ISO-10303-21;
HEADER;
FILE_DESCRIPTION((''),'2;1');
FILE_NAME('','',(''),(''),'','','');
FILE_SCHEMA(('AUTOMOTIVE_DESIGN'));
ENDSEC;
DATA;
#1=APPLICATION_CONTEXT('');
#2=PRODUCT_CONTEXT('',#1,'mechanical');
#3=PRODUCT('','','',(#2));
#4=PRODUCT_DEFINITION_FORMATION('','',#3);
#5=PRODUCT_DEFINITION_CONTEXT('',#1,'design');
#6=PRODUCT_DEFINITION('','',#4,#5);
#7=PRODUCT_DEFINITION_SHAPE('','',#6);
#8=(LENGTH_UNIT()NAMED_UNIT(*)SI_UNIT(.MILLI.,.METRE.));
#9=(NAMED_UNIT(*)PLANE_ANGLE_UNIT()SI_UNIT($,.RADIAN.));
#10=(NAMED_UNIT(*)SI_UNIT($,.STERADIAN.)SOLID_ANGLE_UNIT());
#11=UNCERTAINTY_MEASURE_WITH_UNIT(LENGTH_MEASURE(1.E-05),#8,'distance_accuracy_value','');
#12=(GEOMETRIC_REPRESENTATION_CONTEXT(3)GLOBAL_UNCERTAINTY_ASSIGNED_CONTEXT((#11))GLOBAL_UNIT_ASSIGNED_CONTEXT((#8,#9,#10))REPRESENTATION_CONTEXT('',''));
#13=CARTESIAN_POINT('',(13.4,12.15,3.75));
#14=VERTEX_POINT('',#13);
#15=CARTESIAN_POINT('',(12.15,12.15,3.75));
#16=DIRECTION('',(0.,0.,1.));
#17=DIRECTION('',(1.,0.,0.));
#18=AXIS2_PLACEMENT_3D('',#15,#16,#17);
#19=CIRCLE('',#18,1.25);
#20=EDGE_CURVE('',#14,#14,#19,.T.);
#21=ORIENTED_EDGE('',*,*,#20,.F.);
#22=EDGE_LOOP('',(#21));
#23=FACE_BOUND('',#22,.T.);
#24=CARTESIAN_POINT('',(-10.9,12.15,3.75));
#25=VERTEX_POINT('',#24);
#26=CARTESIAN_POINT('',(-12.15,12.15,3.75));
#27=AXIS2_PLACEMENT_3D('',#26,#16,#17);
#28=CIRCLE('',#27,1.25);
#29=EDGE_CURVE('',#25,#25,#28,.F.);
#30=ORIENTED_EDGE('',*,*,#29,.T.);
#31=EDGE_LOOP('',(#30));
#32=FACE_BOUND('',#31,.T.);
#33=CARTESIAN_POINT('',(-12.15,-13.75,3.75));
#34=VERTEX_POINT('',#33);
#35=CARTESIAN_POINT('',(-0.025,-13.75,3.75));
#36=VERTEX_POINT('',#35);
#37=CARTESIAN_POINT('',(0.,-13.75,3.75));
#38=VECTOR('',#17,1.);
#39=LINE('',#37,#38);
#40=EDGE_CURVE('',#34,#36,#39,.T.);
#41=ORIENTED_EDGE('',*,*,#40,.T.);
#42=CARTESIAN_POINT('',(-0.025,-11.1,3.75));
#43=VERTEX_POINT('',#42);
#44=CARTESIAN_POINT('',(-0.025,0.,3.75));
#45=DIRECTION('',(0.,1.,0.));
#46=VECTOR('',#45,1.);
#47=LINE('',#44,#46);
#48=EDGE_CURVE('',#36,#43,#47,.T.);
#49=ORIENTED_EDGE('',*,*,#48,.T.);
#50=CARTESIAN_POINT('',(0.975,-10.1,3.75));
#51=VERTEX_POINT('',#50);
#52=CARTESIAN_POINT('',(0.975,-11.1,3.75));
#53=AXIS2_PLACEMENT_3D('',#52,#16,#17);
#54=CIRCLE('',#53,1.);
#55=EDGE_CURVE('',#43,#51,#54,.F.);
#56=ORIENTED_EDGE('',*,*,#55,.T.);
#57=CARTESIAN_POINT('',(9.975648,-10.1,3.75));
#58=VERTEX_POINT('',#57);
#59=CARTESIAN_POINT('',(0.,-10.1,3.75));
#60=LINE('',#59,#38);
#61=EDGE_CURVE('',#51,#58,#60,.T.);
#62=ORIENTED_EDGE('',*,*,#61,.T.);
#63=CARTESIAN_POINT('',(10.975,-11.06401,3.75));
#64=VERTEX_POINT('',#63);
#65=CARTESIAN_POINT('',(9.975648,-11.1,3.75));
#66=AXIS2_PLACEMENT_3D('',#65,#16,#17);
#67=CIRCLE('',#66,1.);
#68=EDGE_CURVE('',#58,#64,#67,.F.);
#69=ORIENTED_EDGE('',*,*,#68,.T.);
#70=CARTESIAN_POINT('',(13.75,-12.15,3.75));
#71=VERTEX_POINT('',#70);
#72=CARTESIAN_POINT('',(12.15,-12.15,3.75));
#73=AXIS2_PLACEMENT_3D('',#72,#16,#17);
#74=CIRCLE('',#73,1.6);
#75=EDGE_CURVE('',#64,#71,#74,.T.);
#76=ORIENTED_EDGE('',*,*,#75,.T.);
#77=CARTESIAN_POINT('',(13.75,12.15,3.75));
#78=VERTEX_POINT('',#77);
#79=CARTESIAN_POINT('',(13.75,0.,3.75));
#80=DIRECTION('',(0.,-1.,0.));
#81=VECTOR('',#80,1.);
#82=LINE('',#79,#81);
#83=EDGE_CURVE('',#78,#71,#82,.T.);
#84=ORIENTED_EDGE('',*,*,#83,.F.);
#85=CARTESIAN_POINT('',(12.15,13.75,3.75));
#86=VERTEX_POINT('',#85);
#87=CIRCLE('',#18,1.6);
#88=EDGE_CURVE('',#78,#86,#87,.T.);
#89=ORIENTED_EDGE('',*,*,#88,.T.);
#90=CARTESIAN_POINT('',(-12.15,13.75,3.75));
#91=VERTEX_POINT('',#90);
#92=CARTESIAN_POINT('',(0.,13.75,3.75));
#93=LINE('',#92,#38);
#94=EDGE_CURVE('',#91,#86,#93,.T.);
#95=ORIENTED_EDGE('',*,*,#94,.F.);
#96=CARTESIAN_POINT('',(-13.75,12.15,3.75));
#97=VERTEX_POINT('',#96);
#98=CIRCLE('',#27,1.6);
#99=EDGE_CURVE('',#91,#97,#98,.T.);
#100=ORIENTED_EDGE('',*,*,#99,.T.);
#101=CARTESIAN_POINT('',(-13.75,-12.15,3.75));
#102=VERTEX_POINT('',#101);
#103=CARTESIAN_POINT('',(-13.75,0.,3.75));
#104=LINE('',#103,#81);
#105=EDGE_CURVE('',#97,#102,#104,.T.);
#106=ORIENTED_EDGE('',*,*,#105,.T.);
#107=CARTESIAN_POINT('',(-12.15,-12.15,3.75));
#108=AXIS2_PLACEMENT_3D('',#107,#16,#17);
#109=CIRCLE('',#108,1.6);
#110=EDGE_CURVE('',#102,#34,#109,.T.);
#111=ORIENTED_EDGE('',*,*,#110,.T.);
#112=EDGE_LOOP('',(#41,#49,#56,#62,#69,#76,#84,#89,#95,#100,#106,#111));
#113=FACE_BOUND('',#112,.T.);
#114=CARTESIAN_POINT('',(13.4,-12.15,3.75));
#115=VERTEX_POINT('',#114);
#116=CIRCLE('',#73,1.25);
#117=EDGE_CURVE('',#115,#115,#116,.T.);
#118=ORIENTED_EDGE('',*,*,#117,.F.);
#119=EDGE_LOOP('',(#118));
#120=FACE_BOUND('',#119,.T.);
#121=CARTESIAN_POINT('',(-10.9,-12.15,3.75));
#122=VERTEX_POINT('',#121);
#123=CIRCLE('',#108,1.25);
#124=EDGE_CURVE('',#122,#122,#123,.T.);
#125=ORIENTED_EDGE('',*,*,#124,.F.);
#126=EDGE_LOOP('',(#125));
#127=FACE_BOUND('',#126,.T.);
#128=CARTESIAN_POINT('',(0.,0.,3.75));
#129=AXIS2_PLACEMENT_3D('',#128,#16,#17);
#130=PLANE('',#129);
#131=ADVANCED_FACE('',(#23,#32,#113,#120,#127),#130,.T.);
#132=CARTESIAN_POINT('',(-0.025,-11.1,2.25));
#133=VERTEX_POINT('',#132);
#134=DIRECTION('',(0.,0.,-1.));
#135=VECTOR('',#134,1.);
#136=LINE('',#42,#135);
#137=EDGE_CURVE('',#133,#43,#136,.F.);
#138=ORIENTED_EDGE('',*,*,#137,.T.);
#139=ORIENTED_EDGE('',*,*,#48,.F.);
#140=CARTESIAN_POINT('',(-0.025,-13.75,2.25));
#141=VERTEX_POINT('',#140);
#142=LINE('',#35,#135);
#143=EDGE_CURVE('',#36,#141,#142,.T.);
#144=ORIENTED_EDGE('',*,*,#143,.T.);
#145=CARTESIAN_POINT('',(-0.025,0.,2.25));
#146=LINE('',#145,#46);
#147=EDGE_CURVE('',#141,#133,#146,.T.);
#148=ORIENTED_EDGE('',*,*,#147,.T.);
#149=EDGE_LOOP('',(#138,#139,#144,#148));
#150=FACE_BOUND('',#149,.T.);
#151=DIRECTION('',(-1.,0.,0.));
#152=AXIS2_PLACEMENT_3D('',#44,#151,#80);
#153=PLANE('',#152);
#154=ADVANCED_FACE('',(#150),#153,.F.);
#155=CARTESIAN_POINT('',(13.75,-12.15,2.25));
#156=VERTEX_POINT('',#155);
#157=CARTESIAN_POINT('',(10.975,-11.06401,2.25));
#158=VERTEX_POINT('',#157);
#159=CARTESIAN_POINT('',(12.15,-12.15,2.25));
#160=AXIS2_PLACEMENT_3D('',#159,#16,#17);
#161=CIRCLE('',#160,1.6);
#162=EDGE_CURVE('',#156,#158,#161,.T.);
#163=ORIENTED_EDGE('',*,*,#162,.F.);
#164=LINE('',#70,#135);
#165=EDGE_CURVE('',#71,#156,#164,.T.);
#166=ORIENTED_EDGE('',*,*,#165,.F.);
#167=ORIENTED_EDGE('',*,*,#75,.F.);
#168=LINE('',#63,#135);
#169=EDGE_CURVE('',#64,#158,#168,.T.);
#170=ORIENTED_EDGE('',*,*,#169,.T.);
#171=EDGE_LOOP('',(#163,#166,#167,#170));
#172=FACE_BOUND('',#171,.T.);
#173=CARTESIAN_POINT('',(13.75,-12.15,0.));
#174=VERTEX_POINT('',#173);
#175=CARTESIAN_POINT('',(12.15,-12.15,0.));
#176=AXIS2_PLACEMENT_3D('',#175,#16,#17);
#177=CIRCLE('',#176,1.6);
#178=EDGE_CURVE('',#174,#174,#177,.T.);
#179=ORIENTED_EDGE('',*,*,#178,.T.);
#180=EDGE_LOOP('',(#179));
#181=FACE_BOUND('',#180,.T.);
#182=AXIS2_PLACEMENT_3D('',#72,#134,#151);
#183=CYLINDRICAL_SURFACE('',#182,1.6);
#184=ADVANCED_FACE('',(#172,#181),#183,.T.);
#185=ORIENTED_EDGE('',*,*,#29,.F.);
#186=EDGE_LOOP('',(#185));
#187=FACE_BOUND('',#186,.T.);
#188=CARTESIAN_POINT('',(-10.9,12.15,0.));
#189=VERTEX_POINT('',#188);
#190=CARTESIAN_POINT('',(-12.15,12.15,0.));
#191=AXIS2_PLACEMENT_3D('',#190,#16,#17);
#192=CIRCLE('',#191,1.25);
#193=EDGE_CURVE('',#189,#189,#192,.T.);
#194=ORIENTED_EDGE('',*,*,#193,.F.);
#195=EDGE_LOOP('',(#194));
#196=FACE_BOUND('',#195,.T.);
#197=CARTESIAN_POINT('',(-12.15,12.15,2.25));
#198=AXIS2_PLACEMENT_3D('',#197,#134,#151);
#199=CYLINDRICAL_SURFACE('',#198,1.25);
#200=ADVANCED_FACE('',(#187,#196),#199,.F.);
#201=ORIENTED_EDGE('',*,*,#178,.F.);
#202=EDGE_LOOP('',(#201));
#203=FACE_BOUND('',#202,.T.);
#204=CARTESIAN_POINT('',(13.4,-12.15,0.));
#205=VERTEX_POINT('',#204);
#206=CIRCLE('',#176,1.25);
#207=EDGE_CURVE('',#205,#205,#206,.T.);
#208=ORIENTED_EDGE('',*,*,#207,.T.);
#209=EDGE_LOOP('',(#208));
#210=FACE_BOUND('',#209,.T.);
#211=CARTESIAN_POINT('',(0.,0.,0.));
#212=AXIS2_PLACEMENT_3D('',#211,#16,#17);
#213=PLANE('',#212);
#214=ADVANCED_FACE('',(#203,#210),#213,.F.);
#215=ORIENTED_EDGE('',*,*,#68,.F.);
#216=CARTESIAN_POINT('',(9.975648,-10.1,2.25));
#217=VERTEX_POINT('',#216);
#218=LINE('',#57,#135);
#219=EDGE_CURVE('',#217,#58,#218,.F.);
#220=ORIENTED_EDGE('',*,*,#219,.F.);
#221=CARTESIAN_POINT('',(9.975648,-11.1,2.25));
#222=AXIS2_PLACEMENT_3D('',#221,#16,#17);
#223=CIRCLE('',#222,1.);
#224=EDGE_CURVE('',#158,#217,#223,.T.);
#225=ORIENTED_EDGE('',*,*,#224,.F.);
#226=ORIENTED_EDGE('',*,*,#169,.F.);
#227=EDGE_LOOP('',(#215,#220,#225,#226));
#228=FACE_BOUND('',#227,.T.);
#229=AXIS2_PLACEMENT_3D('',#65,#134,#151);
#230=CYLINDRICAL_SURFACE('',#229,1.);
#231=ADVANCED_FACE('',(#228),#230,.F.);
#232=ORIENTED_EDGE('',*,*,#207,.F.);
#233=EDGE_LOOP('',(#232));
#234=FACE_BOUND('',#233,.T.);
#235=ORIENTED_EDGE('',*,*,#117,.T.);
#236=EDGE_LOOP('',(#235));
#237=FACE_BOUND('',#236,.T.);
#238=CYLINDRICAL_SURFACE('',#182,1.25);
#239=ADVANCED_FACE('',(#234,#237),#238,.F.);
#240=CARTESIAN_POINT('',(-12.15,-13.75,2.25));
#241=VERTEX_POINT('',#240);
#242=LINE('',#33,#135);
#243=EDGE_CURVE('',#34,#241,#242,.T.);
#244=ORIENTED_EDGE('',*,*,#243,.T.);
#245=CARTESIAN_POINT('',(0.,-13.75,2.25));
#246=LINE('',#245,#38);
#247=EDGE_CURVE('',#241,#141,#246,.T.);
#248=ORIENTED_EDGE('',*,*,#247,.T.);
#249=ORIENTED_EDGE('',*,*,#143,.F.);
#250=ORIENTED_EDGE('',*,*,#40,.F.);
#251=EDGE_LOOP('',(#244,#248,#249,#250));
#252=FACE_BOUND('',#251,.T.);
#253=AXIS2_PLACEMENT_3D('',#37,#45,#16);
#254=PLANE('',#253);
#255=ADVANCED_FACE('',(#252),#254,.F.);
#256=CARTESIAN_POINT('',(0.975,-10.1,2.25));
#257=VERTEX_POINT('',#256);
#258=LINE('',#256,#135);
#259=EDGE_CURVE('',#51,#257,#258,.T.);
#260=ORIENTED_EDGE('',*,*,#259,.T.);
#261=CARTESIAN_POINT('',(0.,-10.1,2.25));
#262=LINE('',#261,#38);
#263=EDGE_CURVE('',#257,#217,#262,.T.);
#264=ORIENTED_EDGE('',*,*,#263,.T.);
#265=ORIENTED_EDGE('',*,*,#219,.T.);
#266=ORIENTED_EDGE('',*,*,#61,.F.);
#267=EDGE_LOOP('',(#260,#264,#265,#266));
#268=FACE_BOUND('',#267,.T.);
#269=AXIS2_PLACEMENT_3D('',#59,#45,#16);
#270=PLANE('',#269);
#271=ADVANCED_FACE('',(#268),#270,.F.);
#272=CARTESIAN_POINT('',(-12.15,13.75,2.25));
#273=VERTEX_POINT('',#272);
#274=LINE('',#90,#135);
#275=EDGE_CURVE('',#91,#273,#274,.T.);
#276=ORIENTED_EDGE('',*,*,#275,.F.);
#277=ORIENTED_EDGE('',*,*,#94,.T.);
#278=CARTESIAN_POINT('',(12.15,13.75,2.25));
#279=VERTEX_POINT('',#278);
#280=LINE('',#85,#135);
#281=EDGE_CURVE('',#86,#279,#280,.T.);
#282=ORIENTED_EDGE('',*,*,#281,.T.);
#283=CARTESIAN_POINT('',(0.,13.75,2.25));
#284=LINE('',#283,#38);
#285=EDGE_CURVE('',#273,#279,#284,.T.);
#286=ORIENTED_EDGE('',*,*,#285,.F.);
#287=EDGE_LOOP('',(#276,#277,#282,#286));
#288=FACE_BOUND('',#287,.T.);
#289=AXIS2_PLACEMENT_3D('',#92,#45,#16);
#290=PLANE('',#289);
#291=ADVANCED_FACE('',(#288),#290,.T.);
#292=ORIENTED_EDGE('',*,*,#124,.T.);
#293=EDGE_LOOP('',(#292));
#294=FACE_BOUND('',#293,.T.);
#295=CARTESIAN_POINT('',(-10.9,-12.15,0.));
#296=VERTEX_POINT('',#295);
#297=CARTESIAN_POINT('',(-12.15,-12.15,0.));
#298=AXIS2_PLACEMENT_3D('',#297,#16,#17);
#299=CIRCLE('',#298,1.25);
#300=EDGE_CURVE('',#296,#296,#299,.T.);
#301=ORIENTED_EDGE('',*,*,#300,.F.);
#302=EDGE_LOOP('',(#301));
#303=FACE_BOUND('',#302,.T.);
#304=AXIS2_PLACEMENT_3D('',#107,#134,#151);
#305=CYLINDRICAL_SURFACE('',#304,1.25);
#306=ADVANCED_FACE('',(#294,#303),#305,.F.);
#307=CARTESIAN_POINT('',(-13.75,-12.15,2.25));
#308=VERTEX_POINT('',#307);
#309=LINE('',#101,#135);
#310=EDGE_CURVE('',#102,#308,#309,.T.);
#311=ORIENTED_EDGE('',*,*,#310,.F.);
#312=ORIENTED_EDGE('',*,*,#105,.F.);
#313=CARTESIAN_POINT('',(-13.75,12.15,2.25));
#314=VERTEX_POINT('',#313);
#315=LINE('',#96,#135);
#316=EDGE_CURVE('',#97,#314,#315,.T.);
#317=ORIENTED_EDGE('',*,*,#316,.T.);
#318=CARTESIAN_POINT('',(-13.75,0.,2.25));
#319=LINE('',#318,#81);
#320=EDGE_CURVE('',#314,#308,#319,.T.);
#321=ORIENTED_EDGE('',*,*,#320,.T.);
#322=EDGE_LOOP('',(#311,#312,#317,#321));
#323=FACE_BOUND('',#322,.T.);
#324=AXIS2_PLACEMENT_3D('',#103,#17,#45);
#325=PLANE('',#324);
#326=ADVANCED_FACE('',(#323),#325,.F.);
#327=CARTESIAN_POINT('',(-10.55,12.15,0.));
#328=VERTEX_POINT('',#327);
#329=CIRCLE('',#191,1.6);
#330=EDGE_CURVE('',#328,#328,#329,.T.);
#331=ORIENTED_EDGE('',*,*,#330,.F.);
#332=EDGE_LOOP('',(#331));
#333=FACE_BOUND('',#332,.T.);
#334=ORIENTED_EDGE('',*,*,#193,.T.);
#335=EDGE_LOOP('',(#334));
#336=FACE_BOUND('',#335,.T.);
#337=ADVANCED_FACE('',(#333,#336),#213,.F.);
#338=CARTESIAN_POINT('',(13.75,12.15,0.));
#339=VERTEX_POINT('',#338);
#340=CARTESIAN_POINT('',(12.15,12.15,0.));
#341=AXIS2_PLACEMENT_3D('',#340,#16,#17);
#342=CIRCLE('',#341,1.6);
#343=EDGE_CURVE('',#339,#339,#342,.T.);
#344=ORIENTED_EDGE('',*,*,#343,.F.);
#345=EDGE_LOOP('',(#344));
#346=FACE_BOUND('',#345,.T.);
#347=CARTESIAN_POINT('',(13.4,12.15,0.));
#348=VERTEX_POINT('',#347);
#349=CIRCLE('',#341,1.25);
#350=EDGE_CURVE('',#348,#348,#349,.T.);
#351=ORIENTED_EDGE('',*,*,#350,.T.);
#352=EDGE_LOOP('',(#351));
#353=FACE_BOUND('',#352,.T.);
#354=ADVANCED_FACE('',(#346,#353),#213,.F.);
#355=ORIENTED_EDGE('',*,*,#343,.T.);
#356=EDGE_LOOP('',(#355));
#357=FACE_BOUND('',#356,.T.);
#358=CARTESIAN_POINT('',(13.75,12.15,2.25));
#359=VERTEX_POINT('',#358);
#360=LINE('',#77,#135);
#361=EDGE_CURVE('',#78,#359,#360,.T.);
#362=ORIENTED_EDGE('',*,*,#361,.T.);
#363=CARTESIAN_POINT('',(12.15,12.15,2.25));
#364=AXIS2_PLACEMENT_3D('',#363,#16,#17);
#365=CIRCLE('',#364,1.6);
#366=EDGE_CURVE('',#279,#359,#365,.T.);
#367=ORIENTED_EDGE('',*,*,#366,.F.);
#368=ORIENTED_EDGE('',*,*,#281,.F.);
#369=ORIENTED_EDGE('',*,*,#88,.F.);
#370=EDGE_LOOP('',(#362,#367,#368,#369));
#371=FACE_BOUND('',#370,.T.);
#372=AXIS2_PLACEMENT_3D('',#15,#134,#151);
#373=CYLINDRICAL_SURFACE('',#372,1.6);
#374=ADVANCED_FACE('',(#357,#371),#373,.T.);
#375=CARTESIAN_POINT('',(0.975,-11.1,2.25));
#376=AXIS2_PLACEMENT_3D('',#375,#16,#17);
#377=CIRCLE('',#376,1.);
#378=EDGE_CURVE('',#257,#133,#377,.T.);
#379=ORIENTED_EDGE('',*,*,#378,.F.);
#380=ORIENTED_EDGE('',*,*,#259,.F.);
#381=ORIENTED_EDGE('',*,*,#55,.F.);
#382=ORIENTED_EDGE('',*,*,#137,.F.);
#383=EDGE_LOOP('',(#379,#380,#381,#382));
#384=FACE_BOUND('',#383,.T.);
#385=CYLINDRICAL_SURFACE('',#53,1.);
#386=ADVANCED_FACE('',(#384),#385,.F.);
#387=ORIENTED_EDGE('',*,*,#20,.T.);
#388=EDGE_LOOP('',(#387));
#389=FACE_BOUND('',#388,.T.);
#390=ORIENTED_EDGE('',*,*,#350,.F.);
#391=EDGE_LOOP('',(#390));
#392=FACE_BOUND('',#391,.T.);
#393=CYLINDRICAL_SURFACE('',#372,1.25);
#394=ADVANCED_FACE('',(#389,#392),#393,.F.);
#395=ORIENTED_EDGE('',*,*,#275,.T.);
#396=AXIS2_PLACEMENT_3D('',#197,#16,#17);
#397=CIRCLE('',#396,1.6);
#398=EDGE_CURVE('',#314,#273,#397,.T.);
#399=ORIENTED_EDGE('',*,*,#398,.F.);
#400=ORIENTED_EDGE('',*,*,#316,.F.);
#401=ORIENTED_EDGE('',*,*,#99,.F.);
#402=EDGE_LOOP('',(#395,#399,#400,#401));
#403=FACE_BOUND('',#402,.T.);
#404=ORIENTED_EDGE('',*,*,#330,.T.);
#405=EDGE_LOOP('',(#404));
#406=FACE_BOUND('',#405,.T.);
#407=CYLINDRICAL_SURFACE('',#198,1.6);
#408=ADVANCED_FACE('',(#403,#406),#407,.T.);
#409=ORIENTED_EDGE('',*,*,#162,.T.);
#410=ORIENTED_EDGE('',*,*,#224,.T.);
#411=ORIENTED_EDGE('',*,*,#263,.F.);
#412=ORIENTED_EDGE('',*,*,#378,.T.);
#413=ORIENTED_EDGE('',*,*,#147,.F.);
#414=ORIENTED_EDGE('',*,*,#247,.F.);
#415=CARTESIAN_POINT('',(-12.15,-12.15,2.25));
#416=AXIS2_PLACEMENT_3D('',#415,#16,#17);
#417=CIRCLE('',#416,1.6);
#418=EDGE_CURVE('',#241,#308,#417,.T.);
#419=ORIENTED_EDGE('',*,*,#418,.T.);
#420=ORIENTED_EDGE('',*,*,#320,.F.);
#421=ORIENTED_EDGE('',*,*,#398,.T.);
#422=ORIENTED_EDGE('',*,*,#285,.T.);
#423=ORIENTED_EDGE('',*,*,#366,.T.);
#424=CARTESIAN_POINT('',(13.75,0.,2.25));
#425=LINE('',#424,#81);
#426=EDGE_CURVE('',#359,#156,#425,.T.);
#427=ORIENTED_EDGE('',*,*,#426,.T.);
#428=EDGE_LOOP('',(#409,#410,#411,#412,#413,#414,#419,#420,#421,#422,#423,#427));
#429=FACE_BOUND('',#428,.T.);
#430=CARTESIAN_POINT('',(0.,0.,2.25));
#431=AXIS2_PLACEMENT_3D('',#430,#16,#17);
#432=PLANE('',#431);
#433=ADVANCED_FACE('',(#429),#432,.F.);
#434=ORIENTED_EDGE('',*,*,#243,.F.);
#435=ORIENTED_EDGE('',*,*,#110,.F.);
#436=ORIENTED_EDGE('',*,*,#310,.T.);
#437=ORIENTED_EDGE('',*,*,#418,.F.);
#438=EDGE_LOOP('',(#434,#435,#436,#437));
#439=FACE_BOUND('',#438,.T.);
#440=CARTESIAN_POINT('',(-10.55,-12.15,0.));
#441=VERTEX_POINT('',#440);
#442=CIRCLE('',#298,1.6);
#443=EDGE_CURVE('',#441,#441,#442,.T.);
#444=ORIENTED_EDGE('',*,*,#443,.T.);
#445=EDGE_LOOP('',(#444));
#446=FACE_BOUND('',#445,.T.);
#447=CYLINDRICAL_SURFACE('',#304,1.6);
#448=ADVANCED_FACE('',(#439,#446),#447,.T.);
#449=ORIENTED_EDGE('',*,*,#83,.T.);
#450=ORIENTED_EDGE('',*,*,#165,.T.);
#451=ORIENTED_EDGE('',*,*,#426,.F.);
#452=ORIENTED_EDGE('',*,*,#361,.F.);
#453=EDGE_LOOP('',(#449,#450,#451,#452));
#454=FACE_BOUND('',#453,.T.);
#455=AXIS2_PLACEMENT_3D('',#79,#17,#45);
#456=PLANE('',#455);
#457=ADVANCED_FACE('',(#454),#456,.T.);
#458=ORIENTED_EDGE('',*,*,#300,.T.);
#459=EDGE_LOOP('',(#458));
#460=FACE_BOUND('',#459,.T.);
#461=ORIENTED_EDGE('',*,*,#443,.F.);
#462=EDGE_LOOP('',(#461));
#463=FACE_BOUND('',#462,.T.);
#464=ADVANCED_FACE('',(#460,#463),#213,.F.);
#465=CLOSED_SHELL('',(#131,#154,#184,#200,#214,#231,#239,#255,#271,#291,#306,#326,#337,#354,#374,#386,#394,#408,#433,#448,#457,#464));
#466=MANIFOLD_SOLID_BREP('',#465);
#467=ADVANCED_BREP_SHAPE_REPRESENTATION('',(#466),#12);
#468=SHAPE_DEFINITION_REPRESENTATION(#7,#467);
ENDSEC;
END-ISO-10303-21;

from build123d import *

# Parameters (mm, degrees)
SKETCH1_R             = 1.6
SKETCH1_R_2           = 1.25
BOSS_EXTRUDE1_DEPTH   = 2.25
BOSS_EXTRUDE1_2_DEPTH = 2.25
BOSS_EXTRUDE1_3_DEPTH = 2.25
BOSS_EXTRUDE1_4_DEPTH = 2.25
SKETCH2_R             = 1.25
BOSS_EXTRUDE2_DEPTH   = 1.5
FILLET1_R             = 1


with BuildPart() as part:
    # Sketch1 → Boss-Extrude1 (new body)
    with BuildSketch(Plane.XY):
        with Locations((-12.15, 12.15)):
            Circle(SKETCH1_R)
        with Locations((-12.15, 12.15)):
            Circle(SKETCH1_R_2, mode=Mode.SUBTRACT)
    extrude(amount=BOSS_EXTRUDE1_DEPTH)



with BuildPart() as body_2:
    # Sketch1 → Boss-Extrude1 2 (new body)
    with BuildSketch(Plane.XY):
        with Locations((12.15, 12.15)):
            Circle(SKETCH1_R)
        with Locations((12.15, 12.15)):
            Circle(SKETCH1_R_2, mode=Mode.SUBTRACT)
    extrude(amount=BOSS_EXTRUDE1_2_DEPTH)


with BuildPart() as body_3:
    # Sketch1 → Boss-Extrude1 3 (new body)
    with BuildSketch(Plane.XY):
        with Locations((12.15, -12.15)):
            Circle(SKETCH1_R)
        with Locations((12.15, -12.15)):
            Circle(SKETCH1_R_2, mode=Mode.SUBTRACT)
    extrude(amount=BOSS_EXTRUDE1_3_DEPTH)


with BuildPart() as body_4:
    # Sketch1 → Boss-Extrude1 4 (new body)
    with BuildSketch(Plane.XY):
        with Locations((-12.15, -12.15)):
            Circle(SKETCH1_R)
        with Locations((-12.15, -12.15)):
            Circle(SKETCH1_R_2, mode=Mode.SUBTRACT)
    extrude(amount=BOSS_EXTRUDE1_4_DEPTH)


with BuildPart() as part_1:
    add(part.part)

    add(body_2.part)  # Boss-Extrude2 merges body 2

    add(body_3.part)  # Boss-Extrude2 merges body 3

    add(body_4.part)  # Boss-Extrude2 merges body 4
    # Sketch2 → Boss-Extrude2 (add)
    with BuildSketch(Plane.XY.offset(2.25)):
        with BuildLine():
            Line((12.15, 13.75), (-12.15, 13.75))
            ThreePointArc((-12.15, 13.75), (-13.28137085, 13.28137085), (-13.75, 12.15))
            Line((-13.75, 12.15), (-13.75, -12.15))
            ThreePointArc((-13.75, -12.15), (-13.28137085, -13.28137085), (-12.15, -13.75))
            Line((-12.15, -13.75), (-0.025, -13.75))
            Line((-0.025, -13.75), (-0.025, -10.1))
            Line((-0.025, -10.1), (10.975, -10.1))
            Line((10.975, -10.1), (10.975, -11.064009669))
            ThreePointArc((10.975, -11.064009669), (11.566904811, -13.639966443), (13.75, -12.15))
            Line((13.75, -12.15), (13.75, 12.15))
            ThreePointArc((13.75, 12.15), (13.28137085, 13.28137085), (12.15, 13.75))
        make_face()
        with Locations((-12.15, 12.15)):
            Circle(SKETCH2_R, mode=Mode.SUBTRACT)
        with Locations((12.15, 12.15)):
            Circle(SKETCH2_R, mode=Mode.SUBTRACT)
        with Locations((-12.15, -12.15)):
            Circle(SKETCH2_R, mode=Mode.SUBTRACT)
        with Locations((12.15, -12.15)):
            Circle(SKETCH2_R, mode=Mode.SUBTRACT)
    extrude(amount=BOSS_EXTRUDE2_DEPTH)

    # Fillet1
    # the kernel refuses this fillet: 1 mm, written as the material it adds along each edge
    with BuildSketch(Plane(origin=(10.975, -10.1, 2.25), x_dir=(-1, 0, 0), z_dir=(0, 0, 1)), Plane(origin=(-0.025, -10.1, 2.25), x_dir=(0, -1, 0), z_dir=(0, 0, 1))) as fillet1_piece_1:
        with BuildLine():
            CenterArc((FILLET1_R, FILLET1_R), FILLET1_R, 180, 90)
            Line((0, FILLET1_R), (0, 0))
            Line((0, 0), (FILLET1_R, 0))
        make_face()
    extrude(amount=1.5)


solid = part_1.part
